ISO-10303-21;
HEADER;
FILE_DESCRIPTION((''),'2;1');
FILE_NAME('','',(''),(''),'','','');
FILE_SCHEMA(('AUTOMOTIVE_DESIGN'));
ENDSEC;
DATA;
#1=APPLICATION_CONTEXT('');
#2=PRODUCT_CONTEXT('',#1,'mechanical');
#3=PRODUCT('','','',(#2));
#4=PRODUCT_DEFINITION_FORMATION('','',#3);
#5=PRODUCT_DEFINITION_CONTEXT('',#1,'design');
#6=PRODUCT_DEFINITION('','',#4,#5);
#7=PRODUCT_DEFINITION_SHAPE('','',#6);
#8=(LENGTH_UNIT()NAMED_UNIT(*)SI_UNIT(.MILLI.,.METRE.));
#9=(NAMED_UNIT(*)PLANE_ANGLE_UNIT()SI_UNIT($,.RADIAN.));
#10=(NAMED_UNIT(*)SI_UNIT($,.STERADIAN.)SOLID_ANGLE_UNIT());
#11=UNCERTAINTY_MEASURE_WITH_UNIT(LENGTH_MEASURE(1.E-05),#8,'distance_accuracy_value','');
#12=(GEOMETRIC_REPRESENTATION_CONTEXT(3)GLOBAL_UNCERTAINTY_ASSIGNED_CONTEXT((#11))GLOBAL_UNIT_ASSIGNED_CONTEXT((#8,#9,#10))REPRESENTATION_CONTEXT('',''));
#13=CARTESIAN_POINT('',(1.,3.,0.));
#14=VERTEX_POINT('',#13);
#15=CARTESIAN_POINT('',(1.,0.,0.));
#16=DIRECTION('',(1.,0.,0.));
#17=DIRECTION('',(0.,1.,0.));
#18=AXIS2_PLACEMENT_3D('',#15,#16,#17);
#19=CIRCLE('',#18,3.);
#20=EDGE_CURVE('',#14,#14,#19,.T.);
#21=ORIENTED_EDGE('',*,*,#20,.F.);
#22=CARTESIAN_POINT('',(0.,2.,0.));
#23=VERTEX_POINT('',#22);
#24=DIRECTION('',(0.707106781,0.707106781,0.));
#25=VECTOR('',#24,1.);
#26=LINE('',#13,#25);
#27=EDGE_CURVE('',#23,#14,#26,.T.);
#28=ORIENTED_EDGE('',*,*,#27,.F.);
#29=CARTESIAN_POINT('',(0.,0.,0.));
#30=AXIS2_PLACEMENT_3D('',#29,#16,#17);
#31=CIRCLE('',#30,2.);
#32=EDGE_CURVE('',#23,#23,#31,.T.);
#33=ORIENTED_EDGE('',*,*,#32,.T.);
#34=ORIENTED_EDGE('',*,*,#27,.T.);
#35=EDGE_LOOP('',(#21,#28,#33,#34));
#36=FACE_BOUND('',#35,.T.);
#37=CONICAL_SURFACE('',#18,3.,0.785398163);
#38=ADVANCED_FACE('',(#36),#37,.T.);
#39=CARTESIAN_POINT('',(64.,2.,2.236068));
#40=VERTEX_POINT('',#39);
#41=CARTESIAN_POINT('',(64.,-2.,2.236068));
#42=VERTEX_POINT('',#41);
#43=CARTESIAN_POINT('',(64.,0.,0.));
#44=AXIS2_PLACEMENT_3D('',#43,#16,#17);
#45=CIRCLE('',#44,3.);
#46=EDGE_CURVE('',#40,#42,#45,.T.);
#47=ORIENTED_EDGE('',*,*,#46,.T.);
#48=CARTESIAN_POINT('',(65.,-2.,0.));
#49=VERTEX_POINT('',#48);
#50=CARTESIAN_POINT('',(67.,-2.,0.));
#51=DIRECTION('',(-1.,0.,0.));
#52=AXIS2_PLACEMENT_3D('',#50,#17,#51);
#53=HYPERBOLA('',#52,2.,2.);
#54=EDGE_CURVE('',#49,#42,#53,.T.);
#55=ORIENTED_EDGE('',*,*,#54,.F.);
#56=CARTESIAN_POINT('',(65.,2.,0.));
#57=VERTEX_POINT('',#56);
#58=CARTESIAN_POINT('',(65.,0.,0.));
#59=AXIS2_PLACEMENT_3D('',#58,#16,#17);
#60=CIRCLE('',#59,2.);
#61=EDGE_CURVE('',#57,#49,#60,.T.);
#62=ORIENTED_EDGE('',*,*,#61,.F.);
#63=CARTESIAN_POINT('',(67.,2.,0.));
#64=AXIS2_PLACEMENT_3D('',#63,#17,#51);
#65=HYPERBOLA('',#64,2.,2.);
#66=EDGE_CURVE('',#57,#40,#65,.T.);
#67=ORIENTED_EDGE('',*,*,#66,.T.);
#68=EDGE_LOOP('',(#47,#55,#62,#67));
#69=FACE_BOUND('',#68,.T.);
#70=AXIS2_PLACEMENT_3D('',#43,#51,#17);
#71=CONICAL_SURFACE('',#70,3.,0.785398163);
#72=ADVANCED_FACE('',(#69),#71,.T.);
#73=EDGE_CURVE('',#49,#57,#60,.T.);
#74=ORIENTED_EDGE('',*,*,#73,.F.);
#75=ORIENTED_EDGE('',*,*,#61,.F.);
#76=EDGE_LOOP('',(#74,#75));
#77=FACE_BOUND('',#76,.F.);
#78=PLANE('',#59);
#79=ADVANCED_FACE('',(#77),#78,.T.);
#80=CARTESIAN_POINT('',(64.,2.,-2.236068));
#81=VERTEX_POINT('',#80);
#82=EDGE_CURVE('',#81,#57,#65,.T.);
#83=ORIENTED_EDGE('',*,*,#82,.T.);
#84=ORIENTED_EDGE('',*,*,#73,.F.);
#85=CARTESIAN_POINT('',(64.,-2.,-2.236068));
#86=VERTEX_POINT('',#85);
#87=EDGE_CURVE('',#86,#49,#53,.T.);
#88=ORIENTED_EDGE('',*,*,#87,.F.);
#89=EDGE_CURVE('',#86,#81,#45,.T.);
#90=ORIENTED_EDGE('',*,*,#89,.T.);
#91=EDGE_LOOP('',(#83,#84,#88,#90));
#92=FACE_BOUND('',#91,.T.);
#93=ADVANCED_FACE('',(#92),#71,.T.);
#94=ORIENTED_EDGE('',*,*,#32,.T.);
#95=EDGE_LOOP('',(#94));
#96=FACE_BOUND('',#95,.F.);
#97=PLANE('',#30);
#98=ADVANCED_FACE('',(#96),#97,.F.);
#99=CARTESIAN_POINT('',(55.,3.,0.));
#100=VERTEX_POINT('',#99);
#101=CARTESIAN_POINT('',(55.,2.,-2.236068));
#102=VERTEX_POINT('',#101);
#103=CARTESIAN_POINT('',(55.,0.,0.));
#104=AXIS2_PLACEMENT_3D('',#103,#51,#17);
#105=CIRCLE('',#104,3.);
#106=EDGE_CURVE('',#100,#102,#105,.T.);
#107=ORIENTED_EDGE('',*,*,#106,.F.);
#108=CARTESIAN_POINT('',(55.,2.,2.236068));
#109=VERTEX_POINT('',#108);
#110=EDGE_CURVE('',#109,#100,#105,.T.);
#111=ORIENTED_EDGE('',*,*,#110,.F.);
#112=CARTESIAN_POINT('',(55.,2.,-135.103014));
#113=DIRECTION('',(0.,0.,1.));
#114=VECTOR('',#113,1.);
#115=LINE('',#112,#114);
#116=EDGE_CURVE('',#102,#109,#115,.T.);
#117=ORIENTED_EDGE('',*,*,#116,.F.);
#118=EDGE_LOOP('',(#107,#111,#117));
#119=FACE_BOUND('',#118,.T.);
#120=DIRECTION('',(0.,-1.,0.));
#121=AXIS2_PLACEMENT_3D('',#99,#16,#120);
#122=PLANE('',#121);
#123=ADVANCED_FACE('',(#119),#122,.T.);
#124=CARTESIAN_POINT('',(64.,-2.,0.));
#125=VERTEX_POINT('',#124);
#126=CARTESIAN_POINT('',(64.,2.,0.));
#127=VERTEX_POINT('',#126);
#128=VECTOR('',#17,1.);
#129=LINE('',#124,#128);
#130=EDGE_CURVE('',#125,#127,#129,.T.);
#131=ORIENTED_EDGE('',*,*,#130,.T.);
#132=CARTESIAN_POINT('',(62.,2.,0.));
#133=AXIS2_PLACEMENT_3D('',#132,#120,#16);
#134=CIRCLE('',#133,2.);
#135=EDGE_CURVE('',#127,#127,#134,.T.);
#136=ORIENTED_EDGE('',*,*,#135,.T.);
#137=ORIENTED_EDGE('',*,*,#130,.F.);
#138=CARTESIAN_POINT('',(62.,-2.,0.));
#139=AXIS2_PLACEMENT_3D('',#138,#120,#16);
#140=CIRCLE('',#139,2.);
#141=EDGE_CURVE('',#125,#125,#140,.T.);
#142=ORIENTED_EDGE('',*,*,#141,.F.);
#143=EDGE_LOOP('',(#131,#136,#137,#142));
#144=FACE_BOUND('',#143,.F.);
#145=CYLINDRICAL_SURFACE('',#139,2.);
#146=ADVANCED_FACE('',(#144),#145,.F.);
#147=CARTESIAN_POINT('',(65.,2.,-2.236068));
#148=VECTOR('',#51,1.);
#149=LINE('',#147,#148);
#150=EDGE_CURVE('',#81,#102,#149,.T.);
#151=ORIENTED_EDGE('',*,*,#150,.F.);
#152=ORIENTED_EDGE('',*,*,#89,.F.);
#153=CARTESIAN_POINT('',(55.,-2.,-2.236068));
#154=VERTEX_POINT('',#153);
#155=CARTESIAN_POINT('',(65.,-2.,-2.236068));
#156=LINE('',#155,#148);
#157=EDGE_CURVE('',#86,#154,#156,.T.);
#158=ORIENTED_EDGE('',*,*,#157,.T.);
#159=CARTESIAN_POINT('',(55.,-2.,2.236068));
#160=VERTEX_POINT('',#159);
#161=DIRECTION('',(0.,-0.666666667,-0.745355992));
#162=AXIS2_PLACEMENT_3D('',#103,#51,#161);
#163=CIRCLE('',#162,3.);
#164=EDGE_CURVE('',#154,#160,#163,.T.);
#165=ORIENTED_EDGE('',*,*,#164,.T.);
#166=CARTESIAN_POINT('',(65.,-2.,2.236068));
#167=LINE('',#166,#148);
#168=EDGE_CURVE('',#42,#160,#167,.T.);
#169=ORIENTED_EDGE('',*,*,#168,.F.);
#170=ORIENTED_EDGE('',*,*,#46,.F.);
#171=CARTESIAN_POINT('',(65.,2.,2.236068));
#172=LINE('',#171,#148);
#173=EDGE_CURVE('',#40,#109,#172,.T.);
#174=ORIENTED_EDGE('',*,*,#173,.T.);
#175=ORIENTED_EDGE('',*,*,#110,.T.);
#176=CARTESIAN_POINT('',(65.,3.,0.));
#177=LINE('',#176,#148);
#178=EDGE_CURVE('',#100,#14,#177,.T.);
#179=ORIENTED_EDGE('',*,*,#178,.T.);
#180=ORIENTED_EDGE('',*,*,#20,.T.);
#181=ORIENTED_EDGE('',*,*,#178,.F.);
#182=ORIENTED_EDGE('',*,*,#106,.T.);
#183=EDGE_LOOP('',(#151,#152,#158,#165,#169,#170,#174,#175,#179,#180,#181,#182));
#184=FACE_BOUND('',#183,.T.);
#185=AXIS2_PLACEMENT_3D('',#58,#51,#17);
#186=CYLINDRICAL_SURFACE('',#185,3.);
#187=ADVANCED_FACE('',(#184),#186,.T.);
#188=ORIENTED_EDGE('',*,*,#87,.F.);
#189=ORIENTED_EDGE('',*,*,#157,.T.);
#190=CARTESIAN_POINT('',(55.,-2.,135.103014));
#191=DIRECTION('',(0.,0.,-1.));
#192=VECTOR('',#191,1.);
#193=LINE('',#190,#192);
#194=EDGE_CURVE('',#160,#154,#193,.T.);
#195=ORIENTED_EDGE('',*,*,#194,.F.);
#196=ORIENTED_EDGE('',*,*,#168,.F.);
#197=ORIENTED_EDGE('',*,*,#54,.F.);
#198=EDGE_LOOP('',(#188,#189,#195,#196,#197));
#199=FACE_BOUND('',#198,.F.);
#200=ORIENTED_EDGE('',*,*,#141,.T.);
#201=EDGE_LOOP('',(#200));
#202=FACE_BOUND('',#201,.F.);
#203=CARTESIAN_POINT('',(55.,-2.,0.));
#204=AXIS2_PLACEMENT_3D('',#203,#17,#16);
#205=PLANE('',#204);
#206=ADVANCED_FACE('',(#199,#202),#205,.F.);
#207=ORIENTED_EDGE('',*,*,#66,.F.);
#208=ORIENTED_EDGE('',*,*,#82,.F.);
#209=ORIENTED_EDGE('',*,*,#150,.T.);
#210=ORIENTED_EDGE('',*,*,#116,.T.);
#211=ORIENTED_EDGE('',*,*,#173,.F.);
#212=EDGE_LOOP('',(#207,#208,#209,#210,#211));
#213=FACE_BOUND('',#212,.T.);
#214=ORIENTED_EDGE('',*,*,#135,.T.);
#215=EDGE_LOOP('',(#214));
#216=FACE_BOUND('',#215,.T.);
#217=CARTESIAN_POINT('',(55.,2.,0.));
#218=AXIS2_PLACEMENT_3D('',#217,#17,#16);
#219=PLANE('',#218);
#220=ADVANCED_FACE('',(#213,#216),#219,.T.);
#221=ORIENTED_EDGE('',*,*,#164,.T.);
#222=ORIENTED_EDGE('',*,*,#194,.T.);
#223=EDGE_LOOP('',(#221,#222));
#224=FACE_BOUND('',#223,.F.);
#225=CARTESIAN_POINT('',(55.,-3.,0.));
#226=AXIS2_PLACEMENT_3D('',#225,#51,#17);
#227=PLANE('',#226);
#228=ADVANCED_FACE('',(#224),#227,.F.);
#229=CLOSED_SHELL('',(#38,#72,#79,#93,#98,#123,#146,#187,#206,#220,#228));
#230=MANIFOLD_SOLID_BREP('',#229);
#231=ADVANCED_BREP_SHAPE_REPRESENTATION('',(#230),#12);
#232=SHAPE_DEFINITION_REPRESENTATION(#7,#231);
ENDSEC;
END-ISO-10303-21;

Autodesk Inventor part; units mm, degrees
ref_plane "YZ Plane" through (0, 0, 0) normal (1, 0, 0) x (0, 1, 0)
ref_plane "XZ Plane" through (0, 0, 0) normal (0, 1, 0) x (-1, 0, 0)
ref_plane "XY Plane" through (0, 0, 0) normal (0, 0, 1) x (1, 0, 0)
sketch "Sketch1" plane through (0, 0, 0) normal (0, 0, 1) x (1, 0, 0)
  line L0 (0, 0) -> (65, 0)
  line L1 (65, 0) -> (65, 3)
  line L2 (65, 3) -> (0, 3)
  line L3 (0, 3) -> (0, 0)
  dimension "d0" = 65
  dimension "d1" = 6
revolve "Revolution1" add sketch "Sketch1" angle 360 about axis through (0, 0, 0) along (1, 0, 0)
thread "Thread1" size "M6x1" class "6g" standard "ANSI Metric M Profile" length 15
chamfer "Chamfer1" distance 1 angle 45 2 edges at (0, -3, 0) (65, -3, 0)
sketch "Sketch2" plane through (0, 0, 0) normal (0, 0, 1) x (1, 0, 0)
  line L0 (1, 3) -> (64, 3) projected
  line L1 (65, 3) -> (55, 3)
  line L2 (55, 3) -> (55, 2)
  line L3 (55, 2) -> (65, 2)
  line L4 (65, 2) -> (65, 3)
  line L5 (65, -3) -> (65, 3) projected
  line L6 (65, -3) -> (55, -3)
  line L7 (55, -3) -> (55, -2)
  line L8 (55, -2) -> (65, -2)
  line L9 (65, -2) -> (65, -3)
  point P0 (0, 0)
  point P1 (55, 3)
  dimension "d8" = 4
  dimension "d15" = 10
extrude "Extrusion1" cut sketch "Sketch2" along normal through all both and the other way through all
sketch "Sketch3" plane through (55, -2, -2.2361) normal (0, -1, 0) x (1, 0, 0)
  circle A0 centre (7, 2.2361) radius 2
  line L0 (10, 2.2361) -> (10, 0.2361) projected
  point P0 (-55, 2.2361)
  dimension "d11" = 4
  dimension "d14" = 3
extrude "Extrusion2" cut sketch "Sketch3" against normal through all
properties part number "M6x1_THREADED_ROD" material "Steel, Carbon"
